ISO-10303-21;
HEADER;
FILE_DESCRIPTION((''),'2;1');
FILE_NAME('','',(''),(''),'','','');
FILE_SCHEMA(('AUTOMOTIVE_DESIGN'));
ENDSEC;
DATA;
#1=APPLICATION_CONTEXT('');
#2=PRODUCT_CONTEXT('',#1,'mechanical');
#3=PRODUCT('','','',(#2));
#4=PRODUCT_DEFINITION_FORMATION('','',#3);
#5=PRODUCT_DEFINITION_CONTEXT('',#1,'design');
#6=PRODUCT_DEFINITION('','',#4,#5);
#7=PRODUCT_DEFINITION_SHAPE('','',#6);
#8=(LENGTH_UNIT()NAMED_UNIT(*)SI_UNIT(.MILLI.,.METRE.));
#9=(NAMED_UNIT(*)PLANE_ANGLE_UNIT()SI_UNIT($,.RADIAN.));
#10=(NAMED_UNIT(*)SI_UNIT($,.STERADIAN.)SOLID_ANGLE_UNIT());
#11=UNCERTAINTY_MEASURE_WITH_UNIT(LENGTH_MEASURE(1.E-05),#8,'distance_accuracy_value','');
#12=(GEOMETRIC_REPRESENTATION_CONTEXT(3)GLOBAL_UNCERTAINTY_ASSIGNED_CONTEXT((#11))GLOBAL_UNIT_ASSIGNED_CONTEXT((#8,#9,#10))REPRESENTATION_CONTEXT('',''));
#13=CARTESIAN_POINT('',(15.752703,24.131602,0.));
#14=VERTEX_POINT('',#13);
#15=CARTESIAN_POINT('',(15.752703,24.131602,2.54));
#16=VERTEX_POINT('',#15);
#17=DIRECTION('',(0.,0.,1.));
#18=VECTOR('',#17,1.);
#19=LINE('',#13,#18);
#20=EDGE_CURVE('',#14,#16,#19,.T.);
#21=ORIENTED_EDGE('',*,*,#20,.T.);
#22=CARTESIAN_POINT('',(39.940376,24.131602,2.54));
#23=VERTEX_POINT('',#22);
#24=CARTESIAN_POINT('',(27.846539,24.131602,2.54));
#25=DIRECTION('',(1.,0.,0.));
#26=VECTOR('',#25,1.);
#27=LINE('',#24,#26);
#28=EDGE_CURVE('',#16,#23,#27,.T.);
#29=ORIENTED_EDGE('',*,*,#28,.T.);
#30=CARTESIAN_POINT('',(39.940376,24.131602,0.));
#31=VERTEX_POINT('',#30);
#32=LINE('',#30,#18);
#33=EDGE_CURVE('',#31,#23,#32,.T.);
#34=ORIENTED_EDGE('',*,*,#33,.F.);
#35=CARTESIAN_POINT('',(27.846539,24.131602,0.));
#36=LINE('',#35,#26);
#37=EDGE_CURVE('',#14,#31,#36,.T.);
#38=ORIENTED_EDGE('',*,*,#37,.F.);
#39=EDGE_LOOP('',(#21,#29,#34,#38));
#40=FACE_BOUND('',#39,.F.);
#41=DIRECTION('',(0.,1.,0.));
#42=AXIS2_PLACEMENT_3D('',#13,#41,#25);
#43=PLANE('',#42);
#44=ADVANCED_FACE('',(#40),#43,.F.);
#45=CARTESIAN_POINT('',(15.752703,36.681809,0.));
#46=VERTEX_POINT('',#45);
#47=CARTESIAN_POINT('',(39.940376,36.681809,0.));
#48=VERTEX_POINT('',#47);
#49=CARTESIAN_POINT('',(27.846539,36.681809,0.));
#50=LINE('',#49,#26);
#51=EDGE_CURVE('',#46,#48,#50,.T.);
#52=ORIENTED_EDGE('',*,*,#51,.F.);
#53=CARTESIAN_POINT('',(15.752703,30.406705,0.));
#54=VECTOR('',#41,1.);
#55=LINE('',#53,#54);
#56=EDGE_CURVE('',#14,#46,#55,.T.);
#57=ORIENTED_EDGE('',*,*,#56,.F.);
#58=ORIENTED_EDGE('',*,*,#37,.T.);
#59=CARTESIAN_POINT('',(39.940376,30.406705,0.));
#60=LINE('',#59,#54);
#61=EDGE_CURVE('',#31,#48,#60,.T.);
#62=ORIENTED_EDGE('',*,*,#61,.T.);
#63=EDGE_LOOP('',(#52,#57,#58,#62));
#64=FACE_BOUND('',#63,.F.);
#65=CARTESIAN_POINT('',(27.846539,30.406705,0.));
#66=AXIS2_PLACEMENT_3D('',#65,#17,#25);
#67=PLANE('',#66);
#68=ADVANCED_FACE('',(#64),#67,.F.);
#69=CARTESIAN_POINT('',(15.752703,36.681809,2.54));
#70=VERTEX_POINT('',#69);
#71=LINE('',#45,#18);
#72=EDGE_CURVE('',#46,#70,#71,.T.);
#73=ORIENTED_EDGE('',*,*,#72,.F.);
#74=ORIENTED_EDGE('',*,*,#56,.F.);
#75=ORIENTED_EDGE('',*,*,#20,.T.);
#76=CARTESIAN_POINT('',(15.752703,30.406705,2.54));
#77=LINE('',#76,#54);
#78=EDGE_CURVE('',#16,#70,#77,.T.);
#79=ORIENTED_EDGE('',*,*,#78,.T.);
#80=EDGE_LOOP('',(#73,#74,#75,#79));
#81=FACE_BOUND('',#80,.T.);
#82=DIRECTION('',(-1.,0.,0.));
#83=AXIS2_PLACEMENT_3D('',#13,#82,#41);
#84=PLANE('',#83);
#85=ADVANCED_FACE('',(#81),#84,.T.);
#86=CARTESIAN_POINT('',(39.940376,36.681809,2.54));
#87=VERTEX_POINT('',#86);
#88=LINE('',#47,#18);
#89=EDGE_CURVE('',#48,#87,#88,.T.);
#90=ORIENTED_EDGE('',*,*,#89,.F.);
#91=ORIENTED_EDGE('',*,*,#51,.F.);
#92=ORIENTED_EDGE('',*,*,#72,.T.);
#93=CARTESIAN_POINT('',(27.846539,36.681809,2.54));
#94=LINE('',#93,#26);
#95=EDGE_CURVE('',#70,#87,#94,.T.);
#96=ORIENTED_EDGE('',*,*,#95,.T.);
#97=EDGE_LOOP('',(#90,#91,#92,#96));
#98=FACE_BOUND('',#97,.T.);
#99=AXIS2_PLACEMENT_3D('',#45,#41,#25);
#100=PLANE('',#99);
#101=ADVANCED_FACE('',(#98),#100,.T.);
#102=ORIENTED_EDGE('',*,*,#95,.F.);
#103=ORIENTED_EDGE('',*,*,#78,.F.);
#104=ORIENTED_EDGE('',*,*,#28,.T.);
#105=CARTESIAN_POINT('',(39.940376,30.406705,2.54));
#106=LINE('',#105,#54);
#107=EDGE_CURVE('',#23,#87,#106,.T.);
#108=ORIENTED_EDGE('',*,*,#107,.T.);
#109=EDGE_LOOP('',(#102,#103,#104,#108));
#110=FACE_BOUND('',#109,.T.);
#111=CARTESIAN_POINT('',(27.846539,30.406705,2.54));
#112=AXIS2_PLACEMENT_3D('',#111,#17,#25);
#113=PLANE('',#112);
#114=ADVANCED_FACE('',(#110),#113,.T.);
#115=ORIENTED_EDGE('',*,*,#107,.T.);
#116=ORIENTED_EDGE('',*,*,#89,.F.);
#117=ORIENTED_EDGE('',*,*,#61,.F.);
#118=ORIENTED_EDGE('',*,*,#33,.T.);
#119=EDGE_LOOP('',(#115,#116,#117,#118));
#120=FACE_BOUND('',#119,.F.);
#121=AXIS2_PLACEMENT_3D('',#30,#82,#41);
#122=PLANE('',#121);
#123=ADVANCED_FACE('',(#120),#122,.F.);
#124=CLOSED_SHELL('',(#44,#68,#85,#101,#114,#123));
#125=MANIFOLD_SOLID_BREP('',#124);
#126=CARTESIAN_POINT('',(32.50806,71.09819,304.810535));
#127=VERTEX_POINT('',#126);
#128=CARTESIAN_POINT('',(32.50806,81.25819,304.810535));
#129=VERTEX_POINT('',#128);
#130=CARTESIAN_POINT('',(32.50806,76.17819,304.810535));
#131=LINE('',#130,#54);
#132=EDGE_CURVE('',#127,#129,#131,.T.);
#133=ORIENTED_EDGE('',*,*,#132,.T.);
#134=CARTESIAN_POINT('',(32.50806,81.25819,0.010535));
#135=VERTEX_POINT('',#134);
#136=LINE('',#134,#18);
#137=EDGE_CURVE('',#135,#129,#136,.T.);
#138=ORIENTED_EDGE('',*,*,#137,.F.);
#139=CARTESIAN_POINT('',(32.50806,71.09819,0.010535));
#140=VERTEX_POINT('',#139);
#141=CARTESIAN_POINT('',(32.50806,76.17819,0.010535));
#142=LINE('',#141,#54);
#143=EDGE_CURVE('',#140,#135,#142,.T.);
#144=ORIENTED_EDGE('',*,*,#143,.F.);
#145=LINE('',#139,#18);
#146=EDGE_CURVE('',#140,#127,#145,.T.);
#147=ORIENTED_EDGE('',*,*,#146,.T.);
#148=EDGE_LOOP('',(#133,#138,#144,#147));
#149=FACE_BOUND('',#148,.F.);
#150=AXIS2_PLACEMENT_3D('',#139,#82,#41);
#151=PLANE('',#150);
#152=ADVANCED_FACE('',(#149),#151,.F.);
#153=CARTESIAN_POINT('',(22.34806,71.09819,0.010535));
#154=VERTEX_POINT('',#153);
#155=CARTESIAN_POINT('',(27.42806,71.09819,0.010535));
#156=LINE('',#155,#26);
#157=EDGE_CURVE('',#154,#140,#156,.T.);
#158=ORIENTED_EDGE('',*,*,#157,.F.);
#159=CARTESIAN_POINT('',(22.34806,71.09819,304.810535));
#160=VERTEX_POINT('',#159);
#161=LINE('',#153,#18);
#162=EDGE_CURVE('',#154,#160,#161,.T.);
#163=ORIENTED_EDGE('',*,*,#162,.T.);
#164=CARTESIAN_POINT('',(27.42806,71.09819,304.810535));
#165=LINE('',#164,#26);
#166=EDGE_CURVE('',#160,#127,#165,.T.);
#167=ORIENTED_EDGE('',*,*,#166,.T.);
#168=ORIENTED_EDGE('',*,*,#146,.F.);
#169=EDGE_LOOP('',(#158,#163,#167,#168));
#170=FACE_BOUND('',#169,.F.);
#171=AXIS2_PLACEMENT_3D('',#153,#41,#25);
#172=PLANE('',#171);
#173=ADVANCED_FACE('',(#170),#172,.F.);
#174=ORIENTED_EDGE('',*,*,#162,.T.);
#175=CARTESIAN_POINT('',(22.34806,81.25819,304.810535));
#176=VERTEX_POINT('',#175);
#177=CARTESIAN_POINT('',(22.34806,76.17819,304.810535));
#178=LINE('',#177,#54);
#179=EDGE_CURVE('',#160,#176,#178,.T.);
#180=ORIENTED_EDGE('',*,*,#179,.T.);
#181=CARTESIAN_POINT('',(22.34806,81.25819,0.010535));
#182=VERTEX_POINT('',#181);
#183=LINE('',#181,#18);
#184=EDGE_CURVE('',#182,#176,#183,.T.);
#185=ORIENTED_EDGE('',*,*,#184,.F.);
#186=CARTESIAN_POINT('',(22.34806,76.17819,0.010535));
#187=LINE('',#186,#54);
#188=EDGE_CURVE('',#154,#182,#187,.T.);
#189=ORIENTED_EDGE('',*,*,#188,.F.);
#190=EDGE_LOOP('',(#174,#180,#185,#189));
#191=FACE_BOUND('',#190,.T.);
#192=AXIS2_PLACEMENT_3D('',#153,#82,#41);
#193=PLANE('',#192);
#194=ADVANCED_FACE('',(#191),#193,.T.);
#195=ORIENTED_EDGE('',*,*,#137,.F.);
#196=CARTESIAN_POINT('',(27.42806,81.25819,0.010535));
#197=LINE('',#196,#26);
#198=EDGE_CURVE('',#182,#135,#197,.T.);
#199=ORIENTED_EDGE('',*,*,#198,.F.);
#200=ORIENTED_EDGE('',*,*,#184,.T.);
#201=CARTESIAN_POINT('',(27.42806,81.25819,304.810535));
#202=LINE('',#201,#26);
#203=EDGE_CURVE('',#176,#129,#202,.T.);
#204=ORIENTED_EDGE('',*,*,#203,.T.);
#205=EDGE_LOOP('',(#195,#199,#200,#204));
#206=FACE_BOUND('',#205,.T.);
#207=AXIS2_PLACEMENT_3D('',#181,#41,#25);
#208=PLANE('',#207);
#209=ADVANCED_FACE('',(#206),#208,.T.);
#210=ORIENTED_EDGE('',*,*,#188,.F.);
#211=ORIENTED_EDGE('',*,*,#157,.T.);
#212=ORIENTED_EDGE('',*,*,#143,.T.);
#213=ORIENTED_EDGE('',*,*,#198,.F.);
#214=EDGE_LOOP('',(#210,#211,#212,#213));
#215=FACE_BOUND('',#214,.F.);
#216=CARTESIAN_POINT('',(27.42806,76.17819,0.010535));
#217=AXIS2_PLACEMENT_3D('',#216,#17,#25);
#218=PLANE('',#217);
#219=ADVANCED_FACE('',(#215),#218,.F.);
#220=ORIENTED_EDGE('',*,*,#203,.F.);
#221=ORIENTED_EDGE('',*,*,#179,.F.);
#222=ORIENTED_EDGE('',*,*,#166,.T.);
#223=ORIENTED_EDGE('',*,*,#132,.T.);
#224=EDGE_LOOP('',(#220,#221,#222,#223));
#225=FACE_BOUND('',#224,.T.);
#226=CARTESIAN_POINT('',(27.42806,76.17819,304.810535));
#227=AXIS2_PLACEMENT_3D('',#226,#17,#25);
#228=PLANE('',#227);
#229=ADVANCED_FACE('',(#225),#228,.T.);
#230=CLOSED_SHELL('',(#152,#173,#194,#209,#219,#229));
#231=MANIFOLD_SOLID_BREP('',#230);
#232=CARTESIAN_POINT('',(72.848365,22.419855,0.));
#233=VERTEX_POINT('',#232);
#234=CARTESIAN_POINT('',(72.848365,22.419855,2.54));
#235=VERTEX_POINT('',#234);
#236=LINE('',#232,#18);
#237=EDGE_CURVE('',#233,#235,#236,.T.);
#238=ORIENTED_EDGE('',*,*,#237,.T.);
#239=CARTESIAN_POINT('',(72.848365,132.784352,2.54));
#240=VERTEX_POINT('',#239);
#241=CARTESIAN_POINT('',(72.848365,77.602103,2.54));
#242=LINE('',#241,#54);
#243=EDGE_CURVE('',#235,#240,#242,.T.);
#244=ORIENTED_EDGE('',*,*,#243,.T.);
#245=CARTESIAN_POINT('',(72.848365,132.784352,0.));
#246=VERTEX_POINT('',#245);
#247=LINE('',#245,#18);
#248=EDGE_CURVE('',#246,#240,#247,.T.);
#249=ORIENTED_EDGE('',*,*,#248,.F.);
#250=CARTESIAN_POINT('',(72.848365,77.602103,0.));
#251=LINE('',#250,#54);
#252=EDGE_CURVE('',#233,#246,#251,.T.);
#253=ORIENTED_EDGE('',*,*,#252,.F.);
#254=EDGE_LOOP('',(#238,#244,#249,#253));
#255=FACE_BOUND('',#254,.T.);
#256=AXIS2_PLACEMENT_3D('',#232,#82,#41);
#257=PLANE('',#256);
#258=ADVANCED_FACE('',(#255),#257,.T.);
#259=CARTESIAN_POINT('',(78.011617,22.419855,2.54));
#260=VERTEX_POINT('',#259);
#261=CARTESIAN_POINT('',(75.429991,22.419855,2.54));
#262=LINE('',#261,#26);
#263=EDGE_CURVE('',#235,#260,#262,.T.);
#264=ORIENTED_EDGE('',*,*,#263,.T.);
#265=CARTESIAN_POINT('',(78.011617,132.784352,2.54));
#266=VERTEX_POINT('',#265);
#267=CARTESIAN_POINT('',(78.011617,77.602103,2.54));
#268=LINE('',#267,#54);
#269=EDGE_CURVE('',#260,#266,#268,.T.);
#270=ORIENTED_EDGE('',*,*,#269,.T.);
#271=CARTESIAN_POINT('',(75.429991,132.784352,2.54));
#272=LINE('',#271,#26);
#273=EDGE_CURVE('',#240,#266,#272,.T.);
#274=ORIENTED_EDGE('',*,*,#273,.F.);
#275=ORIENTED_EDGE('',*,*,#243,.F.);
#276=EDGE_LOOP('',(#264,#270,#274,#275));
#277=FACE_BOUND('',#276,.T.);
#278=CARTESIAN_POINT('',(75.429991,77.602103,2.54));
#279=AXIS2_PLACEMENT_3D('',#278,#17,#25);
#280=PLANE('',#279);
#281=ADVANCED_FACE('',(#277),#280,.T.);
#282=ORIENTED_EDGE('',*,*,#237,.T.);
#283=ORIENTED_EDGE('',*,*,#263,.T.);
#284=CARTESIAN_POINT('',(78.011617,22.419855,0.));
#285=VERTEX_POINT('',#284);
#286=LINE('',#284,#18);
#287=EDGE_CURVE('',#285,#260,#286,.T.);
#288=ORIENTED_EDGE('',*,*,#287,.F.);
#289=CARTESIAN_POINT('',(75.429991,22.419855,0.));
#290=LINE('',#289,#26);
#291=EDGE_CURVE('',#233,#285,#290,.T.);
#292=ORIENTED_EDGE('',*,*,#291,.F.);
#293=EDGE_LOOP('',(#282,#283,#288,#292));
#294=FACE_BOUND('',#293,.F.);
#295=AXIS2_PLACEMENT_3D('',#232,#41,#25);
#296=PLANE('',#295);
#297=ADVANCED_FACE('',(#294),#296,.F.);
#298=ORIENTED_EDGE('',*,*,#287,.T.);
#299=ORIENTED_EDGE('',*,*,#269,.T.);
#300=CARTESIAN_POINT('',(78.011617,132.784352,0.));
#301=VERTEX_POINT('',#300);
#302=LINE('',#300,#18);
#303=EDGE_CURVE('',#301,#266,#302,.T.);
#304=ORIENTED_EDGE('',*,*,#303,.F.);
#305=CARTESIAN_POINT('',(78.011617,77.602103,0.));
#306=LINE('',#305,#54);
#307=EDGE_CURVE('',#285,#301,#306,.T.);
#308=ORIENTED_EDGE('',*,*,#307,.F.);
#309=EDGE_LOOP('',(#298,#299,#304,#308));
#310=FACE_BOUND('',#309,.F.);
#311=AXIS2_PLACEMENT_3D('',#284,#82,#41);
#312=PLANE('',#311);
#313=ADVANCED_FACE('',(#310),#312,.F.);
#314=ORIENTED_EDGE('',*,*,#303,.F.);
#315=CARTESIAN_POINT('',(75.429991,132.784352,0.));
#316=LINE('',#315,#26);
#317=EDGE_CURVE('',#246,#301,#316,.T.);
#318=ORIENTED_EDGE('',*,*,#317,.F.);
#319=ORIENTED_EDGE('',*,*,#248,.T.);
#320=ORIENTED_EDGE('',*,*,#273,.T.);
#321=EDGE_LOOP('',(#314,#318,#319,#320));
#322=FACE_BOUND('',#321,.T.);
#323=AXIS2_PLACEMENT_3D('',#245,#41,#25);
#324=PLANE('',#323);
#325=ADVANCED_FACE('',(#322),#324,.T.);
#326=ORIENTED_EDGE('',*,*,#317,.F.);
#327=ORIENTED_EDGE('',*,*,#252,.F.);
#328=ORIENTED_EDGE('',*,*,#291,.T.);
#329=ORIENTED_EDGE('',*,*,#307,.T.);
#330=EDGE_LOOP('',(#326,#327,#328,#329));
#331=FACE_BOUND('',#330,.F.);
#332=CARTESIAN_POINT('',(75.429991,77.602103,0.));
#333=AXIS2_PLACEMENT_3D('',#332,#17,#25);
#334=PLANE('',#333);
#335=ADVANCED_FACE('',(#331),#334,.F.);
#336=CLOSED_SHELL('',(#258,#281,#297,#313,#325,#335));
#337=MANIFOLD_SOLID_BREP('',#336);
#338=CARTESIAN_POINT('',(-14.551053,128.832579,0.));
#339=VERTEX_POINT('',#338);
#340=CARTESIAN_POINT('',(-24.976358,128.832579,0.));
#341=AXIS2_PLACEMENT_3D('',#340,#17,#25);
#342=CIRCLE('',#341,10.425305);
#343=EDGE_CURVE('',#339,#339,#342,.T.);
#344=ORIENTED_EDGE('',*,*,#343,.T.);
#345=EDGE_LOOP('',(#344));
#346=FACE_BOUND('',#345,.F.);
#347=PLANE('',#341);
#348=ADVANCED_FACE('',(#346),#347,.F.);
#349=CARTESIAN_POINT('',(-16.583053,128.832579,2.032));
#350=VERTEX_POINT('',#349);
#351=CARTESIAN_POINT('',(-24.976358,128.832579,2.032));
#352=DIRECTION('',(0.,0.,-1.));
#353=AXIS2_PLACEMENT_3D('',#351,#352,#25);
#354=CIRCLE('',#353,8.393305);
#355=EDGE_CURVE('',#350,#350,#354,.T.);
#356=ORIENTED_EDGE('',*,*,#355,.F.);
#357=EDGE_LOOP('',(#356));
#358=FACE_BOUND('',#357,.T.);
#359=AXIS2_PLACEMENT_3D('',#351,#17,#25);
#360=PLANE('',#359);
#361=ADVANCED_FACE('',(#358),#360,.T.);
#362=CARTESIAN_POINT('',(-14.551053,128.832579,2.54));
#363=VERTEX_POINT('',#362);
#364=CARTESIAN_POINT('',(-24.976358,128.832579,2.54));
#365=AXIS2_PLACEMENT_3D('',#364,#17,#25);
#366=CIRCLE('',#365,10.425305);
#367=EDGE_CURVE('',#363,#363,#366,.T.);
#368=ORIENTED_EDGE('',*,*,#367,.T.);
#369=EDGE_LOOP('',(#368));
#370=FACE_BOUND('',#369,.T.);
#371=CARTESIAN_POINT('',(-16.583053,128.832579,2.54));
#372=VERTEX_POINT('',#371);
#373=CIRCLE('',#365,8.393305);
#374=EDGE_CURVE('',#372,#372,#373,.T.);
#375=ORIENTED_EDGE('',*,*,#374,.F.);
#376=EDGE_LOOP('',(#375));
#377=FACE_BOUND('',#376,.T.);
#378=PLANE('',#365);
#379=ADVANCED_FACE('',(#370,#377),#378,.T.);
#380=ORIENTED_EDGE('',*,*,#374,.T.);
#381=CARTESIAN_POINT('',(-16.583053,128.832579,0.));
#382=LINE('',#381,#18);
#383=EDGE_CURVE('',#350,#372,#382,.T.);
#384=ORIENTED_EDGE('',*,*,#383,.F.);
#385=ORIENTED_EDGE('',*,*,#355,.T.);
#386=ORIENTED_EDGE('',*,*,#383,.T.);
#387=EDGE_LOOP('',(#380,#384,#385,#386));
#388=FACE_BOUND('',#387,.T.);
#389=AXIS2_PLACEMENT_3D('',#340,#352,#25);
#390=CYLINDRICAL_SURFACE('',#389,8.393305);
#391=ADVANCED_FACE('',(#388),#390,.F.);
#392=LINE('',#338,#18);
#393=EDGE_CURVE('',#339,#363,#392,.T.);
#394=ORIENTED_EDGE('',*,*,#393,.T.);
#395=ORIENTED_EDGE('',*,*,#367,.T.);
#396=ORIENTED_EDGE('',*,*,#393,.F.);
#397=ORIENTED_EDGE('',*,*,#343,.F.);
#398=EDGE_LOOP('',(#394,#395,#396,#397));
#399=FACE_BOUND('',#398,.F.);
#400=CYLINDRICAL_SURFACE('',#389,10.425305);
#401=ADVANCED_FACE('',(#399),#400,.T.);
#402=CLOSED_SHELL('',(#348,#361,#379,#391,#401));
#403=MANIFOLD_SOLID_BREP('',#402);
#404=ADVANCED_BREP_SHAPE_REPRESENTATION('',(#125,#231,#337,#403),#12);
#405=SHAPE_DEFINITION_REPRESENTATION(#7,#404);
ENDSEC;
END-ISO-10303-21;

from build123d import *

# Parameters (mm, degrees)
F2_W     = 10.16
F2_H     = 10.16
F3_DEPTH = 304.8
F4_W     = 24.1876728833
F4_H     = 12.5502068549
F5_DEPTH = 2.54
F6_W     = 5.1632523537
F6_H     = 110.3644967079
F7_DEPTH = 2.54
F8_R     = 10.4253047929
F9_DEPTH = 2.54
F11_T    = -2.032


# Not quite as in the source:
# - a feature of the source that left no trace in its solid (it failed there, or was rolled back) is left out


with BuildPart() as f3:
    # F2 (on face) → F3 (new body)
    with BuildSketch(Plane.XY.offset(0.010535121)):
        with Locations((27.4280595768, 76.1781896186)):
            Rectangle(F2_W, F2_H)
    extrude(amount=F3_DEPTH)


with BuildPart() as f5:
    # F4 (on Top) → F5 (new body)
    with BuildSketch(Plane.XY):
        with Locations((27.8465393931, 30.4067051038)):
            Rectangle(F4_W, F4_H)
    extrude(amount=F5_DEPTH)


with BuildPart() as f7:
    # F6 (on Top) → F7 (new body)
    with BuildSketch(Plane.XY):
        with Locations((75.4299908876, 77.6021033525)):
            Rectangle(F6_W, F6_H)
    extrude(amount=F7_DEPTH)


with BuildPart() as f9:
    # F8 (on Top) → F9 (new body)
    with BuildSketch(Plane.XY):
        with Locations((-24.9763578176, 128.8325786591)):
            Circle(F8_R)
    extrude(amount=F9_DEPTH)

    # F11
    f11_openings = [f9.faces().sort_by_distance(p)[0] for p in [
        (-24.976358, 128.832579, 2.54),
    ]]
    offset(amount=F11_T, openings=f11_openings)


solid = Compound([f3.part, f5.part, f7.part, f9.part])
